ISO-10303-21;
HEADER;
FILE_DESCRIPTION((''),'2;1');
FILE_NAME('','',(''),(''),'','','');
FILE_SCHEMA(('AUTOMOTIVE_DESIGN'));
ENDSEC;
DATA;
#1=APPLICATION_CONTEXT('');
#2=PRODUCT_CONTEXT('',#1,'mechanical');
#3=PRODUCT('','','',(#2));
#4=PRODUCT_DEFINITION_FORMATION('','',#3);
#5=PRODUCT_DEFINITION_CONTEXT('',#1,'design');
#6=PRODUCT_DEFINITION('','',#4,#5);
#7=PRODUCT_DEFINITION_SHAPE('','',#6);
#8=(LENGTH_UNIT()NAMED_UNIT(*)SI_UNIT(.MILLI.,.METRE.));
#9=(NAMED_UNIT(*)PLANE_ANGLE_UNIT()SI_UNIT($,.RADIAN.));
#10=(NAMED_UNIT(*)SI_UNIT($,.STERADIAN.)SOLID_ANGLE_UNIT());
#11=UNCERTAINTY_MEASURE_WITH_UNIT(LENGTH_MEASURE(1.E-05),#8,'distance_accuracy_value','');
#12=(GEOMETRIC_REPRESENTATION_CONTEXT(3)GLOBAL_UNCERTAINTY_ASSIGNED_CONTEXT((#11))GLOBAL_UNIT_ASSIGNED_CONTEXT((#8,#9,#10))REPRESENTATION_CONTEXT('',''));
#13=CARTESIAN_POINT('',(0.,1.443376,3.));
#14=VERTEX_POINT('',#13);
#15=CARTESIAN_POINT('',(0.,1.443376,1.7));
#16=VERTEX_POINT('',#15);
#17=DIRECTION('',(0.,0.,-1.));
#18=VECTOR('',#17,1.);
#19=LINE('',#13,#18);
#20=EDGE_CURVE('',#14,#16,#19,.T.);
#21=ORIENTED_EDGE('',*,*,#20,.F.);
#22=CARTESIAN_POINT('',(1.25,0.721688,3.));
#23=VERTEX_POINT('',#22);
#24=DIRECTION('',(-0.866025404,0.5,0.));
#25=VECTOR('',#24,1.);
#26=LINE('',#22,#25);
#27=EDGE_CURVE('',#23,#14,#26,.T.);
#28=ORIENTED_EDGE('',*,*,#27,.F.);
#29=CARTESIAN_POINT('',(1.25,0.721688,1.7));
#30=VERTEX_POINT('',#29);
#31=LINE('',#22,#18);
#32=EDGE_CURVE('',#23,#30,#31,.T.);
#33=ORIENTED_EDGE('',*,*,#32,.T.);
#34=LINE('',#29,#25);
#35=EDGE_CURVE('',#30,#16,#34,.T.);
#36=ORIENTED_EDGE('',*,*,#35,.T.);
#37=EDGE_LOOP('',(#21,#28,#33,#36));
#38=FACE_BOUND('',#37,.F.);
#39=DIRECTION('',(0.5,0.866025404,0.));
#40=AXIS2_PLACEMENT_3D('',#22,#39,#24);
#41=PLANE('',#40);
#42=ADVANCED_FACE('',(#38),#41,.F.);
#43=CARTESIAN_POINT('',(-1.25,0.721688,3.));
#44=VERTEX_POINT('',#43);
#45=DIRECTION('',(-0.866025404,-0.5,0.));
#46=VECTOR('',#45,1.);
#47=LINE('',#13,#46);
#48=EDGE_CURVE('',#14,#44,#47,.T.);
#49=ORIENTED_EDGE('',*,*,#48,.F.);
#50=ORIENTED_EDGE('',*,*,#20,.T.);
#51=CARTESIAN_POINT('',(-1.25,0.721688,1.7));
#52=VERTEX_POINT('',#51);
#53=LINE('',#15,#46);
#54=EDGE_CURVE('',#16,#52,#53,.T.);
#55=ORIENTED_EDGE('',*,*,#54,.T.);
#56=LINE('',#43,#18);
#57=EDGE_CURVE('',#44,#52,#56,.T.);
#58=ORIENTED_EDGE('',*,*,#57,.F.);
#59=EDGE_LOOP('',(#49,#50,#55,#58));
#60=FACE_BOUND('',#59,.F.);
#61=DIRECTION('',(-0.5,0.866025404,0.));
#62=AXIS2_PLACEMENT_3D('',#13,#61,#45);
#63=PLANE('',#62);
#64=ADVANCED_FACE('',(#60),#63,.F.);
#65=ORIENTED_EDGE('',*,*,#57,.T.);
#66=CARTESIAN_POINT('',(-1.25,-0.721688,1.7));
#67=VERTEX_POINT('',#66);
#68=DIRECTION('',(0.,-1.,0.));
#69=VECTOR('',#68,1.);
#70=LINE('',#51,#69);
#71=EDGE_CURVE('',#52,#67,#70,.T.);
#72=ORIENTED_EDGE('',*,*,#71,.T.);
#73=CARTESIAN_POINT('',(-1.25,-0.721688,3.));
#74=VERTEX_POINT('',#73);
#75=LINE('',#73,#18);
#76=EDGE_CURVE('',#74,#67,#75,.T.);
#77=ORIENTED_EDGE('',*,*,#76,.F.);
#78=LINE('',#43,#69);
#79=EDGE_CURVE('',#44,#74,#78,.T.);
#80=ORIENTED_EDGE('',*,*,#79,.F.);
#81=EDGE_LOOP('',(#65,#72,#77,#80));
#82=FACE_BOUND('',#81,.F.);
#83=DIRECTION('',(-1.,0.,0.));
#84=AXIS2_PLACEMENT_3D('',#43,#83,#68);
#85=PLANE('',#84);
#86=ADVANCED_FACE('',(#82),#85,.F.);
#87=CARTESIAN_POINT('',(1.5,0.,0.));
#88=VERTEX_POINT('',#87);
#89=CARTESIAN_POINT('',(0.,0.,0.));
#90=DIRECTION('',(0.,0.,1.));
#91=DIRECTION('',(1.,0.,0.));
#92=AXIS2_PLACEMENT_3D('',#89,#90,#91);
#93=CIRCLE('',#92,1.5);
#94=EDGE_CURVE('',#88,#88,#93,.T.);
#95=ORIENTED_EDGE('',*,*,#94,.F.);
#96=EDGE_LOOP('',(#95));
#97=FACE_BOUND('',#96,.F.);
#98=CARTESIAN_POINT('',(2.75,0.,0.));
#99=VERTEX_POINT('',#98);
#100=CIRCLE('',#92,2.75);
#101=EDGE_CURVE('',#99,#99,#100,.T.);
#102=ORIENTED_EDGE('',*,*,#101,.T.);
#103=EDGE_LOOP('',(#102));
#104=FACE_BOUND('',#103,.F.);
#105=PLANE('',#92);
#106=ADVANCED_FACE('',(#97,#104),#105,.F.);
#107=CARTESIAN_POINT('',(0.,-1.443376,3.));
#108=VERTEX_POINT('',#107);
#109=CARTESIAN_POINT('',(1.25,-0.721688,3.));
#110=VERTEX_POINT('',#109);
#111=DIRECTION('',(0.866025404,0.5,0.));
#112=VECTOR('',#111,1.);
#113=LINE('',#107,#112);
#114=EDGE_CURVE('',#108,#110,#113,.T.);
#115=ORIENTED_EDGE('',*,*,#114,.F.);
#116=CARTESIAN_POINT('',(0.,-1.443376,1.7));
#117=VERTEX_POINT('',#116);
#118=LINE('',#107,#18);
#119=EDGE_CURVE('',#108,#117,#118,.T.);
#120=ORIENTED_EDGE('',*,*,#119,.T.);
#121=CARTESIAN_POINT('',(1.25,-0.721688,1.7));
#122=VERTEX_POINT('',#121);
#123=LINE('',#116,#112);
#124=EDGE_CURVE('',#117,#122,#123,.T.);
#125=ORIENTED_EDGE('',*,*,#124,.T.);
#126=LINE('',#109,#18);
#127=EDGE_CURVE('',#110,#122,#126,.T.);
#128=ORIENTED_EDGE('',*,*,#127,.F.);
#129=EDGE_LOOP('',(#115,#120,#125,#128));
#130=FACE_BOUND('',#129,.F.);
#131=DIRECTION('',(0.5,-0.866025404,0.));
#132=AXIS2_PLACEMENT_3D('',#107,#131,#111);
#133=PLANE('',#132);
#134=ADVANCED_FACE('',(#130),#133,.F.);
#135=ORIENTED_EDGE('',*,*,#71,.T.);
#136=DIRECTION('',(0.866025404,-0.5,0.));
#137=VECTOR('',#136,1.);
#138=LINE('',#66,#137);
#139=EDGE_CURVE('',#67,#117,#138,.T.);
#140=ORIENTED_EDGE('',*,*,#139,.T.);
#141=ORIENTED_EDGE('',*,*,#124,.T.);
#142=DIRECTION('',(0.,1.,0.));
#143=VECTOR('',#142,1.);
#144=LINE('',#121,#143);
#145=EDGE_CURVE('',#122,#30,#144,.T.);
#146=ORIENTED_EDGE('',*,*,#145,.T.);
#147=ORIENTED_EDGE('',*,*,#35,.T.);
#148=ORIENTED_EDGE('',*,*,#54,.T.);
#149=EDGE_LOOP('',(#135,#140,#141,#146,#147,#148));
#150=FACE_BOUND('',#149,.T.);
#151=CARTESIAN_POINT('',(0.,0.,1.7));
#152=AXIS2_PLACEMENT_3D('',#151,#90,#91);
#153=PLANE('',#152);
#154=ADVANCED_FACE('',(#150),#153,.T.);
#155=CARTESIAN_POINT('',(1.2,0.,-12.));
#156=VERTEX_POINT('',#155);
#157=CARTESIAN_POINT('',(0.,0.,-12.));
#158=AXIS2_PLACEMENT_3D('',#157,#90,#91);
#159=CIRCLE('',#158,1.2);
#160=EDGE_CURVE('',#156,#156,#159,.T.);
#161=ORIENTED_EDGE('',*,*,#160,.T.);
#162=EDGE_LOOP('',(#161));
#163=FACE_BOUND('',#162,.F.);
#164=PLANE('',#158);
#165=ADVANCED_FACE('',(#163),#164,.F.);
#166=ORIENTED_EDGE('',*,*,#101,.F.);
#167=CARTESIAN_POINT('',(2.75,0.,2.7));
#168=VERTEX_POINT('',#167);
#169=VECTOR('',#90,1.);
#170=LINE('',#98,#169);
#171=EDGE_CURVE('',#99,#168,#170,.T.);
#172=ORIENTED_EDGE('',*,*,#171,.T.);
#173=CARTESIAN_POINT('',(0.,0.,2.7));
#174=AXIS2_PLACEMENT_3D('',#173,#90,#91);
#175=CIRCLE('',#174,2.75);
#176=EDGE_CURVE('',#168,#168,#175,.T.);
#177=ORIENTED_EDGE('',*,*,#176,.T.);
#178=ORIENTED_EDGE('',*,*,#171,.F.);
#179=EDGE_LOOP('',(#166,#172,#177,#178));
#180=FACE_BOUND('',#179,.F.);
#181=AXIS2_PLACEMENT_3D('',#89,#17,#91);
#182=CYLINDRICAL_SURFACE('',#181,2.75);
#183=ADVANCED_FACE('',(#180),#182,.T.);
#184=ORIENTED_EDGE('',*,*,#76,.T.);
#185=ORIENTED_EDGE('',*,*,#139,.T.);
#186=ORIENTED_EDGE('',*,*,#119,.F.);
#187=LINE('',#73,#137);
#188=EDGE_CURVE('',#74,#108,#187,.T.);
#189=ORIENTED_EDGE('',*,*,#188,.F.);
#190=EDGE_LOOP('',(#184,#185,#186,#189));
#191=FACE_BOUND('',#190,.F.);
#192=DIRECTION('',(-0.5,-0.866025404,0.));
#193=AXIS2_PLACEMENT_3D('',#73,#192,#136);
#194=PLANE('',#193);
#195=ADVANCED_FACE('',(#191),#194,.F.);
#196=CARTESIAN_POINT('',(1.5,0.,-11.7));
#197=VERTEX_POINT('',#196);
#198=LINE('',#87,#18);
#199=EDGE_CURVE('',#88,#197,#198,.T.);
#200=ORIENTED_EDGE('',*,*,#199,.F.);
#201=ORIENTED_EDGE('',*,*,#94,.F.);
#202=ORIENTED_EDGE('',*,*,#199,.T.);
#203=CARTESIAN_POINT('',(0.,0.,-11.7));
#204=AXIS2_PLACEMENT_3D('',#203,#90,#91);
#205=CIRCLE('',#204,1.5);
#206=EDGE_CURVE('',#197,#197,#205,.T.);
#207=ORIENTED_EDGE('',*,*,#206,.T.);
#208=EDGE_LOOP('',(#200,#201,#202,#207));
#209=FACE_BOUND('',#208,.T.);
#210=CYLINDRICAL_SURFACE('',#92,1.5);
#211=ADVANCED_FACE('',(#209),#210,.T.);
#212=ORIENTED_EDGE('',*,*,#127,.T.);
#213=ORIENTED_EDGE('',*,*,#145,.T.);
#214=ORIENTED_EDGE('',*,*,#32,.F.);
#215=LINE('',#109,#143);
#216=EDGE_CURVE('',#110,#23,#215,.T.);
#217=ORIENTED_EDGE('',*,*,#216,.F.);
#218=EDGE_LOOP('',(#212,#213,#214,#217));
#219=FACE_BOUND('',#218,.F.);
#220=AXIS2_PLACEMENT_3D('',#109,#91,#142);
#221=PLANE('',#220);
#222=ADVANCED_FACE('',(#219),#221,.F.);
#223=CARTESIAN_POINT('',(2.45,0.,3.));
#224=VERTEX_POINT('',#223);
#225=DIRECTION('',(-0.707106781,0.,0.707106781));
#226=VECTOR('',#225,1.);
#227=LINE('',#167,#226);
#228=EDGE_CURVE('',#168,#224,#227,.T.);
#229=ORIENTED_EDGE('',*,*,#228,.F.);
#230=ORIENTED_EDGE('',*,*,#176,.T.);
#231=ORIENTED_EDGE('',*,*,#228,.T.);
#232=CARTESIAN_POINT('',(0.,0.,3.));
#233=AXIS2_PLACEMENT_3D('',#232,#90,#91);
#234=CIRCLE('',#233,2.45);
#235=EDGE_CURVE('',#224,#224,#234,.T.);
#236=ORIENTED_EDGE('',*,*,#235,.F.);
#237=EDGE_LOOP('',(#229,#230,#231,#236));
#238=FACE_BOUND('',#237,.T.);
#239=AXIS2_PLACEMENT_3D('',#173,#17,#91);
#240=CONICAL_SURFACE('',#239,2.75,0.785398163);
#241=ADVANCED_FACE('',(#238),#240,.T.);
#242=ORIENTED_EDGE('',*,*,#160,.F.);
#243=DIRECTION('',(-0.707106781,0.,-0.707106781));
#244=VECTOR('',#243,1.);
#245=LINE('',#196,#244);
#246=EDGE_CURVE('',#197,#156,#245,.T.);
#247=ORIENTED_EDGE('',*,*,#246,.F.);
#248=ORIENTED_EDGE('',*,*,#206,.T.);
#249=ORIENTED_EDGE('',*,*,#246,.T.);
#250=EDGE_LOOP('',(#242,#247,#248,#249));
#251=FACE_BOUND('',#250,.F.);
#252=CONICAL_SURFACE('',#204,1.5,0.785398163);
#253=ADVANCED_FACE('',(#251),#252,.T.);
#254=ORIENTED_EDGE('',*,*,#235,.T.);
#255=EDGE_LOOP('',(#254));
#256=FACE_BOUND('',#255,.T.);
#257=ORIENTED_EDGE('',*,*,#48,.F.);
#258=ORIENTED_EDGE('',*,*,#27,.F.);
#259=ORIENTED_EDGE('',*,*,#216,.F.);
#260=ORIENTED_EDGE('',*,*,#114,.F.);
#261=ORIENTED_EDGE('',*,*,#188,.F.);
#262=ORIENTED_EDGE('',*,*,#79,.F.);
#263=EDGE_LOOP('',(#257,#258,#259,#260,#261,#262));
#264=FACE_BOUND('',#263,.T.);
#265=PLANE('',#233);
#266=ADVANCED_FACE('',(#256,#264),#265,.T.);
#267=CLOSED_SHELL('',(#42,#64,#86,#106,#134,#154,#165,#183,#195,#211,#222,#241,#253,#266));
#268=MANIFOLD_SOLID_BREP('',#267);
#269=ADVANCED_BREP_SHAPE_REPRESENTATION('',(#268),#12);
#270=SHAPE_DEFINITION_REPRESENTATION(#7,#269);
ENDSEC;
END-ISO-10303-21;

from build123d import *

# Parameters (mm, degrees)
F2_R      = 1.5
F3_DEPTH  = 12
F2_R_2    = 2.75
F3_FACE_R = 1.5
F4_DEPTH  = 3
F5_SIZE   = 0.3
F7_DEPTH  = 1.3


with BuildPart() as f3:
    # F2 (on Top) → F3 (new body)
    with BuildSketch(Plane.XY):
        Circle(F2_R)
    extrude(amount=-F3_DEPTH)

    # F2 (on Top) + F3_face (on face) → F4 (join)
    with BuildSketch(Plane.XY):
        Circle(F2_R_2)
        Circle(F2_R, mode=Mode.SUBTRACT)
    with BuildSketch(Plane.XY):
        Circle(F3_FACE_R)
    extrude(amount=F4_DEPTH)

    # F5
    f5_edges = [f3.edges().sort_by_distance(p)[0] for p in [
        (-1.5, 0, -12),
        (-2.75, 0, 3),
    ]]
    chamfer(f5_edges, length=F5_SIZE)

    # F6 (on face) → F7 (cut)
    with BuildSketch(Plane.XY.offset(3)):
        Polygon((1.25, -0.7216878365), (1.25, 0.7216878365), (0, 1.443375673), (-1.25, 0.7216878365), (-1.25, -0.7216878365), (0, -1.443375673), align=None)
    extrude(amount=-F7_DEPTH, mode=Mode.SUBTRACT)


solid = f3.part
